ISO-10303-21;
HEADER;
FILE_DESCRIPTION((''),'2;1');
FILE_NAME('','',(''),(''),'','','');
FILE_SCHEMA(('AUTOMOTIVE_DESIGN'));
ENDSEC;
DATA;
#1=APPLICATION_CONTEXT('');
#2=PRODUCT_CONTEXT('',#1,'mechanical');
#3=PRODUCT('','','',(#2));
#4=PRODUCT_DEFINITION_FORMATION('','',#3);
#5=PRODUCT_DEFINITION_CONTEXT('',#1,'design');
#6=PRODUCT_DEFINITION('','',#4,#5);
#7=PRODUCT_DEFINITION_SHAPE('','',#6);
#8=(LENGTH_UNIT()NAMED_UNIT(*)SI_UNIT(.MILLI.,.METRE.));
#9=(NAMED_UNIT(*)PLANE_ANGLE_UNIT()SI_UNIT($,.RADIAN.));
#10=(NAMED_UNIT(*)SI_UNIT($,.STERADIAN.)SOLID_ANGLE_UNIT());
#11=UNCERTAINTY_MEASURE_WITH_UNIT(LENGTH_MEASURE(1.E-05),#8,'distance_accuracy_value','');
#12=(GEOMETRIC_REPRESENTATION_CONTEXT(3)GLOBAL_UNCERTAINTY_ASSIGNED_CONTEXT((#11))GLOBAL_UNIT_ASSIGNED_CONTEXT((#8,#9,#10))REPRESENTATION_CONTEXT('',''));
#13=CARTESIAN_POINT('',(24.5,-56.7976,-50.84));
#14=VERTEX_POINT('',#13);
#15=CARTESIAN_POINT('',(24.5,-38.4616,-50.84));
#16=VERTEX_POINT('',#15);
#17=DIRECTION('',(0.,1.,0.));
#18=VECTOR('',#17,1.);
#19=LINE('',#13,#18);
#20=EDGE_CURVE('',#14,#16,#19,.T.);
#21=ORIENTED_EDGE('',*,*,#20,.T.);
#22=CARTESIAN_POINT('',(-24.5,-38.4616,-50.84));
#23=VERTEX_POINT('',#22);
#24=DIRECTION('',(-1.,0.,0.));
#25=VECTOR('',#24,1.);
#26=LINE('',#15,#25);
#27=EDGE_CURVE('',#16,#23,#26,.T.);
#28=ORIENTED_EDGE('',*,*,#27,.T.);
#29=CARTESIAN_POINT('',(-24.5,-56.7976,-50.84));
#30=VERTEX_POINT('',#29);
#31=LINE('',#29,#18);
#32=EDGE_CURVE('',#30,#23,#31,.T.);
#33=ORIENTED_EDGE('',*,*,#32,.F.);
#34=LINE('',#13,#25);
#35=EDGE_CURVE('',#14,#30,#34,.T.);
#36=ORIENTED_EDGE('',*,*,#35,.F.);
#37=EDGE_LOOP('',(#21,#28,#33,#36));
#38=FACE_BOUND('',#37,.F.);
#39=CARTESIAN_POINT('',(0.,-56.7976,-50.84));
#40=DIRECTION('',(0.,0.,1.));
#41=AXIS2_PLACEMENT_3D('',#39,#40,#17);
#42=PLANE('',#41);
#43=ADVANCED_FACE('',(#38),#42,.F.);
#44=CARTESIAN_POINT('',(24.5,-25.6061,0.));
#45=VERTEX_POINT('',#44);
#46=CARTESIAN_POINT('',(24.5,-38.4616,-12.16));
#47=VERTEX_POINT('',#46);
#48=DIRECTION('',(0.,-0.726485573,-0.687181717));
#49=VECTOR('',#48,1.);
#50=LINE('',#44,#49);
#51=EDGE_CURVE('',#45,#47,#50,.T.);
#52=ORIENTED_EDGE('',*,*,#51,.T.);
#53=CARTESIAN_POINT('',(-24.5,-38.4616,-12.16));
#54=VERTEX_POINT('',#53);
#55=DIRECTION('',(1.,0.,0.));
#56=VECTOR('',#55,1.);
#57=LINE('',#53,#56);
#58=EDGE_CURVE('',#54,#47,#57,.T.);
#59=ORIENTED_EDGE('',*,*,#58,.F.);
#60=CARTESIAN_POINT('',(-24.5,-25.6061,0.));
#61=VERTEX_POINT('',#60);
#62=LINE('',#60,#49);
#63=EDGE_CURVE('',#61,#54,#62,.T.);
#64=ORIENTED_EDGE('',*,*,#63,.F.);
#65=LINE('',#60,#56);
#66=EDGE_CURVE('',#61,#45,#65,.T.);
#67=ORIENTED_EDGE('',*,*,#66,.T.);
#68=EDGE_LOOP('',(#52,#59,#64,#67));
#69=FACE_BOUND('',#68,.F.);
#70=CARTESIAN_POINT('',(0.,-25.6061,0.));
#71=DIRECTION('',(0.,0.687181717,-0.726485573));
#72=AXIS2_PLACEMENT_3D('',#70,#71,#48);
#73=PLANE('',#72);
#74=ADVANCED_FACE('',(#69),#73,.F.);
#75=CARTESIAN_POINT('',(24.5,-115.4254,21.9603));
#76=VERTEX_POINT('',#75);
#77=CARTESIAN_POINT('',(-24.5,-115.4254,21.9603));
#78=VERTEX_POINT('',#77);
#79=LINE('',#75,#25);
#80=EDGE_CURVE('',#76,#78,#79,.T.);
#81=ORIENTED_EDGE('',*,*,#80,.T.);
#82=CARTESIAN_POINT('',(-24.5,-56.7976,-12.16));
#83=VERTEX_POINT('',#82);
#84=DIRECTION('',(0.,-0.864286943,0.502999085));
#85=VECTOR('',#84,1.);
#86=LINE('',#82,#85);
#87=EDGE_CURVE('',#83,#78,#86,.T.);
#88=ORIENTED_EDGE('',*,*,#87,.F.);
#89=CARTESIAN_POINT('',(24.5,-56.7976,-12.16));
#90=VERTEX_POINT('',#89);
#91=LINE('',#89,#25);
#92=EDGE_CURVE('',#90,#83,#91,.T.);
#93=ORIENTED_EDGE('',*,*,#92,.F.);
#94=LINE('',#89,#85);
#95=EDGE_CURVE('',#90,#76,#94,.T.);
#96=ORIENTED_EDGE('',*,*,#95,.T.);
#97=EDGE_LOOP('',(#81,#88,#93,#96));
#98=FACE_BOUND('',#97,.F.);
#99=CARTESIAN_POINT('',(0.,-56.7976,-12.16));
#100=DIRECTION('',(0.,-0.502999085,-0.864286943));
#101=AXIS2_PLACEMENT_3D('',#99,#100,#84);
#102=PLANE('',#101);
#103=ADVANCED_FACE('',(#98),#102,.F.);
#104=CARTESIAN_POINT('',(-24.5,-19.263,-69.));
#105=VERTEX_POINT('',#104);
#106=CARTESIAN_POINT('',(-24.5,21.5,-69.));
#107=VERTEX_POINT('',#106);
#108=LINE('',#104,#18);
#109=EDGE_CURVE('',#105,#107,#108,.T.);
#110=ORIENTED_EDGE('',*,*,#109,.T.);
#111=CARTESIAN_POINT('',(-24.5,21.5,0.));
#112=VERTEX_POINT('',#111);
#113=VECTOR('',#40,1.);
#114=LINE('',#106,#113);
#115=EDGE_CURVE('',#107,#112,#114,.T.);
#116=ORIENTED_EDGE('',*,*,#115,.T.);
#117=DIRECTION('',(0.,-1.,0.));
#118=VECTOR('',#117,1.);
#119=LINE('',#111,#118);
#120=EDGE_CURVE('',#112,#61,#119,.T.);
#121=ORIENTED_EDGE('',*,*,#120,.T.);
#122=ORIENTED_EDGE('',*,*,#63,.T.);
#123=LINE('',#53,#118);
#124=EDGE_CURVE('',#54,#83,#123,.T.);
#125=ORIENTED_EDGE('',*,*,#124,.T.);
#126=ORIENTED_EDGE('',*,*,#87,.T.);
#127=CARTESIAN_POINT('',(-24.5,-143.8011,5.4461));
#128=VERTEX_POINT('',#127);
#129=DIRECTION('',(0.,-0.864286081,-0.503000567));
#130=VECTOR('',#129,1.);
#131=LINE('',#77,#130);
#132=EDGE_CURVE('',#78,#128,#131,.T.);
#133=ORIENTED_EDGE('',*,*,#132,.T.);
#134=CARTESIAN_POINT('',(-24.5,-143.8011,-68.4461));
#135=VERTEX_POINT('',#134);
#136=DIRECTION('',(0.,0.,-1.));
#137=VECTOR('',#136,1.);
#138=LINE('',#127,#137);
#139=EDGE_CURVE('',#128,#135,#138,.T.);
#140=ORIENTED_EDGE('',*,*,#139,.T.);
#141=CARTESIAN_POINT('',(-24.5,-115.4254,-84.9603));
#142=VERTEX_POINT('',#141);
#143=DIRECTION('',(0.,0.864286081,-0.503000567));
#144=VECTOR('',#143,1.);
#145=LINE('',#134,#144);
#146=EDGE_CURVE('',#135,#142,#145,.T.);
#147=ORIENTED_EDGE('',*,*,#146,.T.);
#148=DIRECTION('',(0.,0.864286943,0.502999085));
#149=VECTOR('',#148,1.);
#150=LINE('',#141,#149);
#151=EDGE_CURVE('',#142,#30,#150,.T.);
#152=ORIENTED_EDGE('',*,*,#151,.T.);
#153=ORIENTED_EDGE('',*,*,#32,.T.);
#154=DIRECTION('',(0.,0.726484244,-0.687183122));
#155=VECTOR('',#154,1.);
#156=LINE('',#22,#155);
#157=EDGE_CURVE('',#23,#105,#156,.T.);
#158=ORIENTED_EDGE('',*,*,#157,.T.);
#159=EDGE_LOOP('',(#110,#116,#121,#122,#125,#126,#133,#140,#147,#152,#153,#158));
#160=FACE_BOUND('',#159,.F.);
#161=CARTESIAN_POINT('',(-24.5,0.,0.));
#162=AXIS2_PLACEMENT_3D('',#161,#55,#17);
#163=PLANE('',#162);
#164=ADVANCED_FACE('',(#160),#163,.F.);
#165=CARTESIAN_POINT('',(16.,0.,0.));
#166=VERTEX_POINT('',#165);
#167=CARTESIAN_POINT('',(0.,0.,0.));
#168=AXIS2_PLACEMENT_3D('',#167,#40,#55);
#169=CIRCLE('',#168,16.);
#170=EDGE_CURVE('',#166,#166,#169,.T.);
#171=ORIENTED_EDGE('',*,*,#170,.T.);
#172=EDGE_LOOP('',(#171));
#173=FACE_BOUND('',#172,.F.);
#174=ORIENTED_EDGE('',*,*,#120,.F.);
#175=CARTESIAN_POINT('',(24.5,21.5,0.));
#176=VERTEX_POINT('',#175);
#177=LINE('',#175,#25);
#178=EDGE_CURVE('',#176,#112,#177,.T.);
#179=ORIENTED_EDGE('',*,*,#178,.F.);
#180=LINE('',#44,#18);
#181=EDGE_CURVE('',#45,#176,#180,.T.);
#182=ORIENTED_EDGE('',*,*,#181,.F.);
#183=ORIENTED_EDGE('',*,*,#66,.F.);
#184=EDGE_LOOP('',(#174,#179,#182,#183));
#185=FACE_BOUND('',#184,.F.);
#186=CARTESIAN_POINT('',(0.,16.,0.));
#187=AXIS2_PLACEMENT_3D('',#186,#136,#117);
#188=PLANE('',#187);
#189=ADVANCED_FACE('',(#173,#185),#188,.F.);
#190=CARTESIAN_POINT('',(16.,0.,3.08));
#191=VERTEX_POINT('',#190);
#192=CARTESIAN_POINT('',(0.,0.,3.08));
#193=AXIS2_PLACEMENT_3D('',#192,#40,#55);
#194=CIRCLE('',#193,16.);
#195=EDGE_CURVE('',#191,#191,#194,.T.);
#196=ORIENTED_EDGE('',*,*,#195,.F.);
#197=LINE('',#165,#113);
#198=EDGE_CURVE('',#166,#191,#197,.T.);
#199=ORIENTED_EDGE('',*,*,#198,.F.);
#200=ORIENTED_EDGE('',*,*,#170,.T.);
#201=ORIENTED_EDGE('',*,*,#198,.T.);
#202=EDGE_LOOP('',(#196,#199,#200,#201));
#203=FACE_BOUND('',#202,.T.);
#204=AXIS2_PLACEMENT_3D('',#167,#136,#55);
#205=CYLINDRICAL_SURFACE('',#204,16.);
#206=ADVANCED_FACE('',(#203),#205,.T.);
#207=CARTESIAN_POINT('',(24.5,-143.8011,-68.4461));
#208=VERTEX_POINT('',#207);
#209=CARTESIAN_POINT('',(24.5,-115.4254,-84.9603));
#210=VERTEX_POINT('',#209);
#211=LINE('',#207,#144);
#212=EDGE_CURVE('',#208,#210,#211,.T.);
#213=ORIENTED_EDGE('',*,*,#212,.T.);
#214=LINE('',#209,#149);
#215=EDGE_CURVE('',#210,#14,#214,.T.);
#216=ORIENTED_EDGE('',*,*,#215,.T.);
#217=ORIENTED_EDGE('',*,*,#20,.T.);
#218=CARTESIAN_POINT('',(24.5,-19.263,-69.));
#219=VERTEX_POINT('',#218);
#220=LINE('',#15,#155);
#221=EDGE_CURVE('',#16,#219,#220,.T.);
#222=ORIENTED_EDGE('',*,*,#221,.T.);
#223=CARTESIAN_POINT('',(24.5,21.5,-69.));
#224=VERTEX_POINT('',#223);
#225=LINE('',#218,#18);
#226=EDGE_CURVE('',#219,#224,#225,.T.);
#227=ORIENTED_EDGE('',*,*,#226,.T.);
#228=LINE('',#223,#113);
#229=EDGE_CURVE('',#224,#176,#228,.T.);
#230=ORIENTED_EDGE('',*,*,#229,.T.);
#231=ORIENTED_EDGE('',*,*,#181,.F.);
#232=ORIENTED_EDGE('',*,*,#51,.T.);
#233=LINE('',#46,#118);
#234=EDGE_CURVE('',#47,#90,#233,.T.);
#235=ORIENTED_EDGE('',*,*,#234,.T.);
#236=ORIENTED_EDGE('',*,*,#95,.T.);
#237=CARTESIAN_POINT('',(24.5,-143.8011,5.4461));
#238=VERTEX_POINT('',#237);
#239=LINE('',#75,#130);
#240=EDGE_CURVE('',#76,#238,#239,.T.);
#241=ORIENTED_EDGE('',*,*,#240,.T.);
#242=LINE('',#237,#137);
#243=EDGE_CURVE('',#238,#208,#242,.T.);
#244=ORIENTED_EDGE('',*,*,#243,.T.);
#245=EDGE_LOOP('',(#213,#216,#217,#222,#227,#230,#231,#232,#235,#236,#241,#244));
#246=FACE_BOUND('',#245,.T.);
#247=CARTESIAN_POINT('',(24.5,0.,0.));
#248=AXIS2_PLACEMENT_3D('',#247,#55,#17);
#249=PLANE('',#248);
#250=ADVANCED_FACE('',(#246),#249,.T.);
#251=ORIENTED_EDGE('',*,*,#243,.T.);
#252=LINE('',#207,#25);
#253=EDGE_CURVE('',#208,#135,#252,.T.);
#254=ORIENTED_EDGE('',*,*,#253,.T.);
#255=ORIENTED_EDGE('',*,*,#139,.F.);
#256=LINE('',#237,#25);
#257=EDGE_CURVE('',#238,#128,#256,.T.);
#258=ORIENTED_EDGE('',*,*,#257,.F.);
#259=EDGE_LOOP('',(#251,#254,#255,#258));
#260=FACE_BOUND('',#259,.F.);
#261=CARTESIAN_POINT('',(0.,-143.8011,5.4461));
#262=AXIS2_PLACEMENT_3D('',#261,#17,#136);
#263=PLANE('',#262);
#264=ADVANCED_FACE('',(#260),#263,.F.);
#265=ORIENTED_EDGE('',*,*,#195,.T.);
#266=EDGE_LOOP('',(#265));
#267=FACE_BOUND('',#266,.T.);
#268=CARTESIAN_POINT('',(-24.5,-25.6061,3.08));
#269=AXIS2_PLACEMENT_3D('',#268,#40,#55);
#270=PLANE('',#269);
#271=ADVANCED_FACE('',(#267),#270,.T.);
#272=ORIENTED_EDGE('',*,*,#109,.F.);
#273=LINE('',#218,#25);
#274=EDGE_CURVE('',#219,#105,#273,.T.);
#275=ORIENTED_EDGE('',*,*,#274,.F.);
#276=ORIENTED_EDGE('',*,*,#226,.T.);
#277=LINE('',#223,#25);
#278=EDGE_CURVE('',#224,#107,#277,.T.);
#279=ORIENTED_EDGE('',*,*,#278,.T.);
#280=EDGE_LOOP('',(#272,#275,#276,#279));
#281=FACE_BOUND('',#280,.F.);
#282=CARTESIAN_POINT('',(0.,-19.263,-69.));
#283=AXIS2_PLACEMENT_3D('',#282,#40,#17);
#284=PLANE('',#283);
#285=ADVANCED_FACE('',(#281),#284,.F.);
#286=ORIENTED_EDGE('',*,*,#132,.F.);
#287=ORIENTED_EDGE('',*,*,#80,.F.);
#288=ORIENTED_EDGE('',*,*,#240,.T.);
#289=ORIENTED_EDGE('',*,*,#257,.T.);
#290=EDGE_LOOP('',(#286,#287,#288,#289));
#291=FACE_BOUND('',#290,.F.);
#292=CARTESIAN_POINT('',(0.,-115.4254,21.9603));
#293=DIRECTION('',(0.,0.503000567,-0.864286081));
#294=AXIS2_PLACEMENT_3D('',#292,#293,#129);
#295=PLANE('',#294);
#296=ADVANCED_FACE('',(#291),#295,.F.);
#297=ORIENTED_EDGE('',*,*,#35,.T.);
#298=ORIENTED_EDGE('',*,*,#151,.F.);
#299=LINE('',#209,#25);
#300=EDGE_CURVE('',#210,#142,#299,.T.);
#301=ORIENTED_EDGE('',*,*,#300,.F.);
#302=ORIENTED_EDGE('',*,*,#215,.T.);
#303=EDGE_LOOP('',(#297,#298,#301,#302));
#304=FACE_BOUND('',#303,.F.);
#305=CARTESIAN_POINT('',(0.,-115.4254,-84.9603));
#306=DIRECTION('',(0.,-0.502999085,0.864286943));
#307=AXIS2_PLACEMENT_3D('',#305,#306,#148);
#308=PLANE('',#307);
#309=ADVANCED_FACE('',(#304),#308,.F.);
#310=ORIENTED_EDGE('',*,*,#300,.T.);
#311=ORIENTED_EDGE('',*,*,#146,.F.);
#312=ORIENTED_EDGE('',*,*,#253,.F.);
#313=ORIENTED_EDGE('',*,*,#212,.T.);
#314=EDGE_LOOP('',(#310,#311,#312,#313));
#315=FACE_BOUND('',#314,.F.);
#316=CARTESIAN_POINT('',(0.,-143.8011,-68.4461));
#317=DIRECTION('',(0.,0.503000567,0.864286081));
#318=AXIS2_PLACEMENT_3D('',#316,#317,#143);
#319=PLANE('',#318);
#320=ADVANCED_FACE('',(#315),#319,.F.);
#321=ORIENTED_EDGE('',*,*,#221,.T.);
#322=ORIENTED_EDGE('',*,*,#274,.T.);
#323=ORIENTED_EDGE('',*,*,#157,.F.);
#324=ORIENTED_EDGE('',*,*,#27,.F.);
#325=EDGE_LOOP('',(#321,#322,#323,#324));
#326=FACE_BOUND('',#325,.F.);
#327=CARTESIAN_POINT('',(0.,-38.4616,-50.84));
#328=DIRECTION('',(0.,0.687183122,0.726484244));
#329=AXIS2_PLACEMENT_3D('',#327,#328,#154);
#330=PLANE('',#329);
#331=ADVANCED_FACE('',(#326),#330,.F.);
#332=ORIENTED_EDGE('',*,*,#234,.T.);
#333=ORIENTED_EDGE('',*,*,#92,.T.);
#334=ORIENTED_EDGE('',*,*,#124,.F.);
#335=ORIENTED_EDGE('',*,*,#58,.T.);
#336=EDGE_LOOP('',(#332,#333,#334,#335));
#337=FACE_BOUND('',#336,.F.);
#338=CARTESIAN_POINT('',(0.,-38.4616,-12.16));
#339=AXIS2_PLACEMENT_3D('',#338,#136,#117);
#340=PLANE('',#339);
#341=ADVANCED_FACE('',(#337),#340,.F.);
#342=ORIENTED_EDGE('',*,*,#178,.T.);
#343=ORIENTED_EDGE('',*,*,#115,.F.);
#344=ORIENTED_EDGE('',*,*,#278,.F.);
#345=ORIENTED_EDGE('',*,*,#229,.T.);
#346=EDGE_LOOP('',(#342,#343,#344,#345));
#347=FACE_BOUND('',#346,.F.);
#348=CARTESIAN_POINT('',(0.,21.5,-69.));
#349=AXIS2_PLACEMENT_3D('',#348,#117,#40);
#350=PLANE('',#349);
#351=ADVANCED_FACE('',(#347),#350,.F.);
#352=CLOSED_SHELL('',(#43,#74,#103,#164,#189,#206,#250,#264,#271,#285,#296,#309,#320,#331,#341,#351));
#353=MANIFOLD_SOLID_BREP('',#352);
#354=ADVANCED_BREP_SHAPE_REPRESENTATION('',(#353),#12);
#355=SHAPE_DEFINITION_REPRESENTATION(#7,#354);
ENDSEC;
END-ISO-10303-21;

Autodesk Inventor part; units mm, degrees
ref_plane "XZ Plane" through (0, 0, 0) normal (0, 1, 0) x (-1, 0, 0)
sketch "Sketch1" plane through (0, 0, 0) normal (1, 0, 0) x (0, 1, 0)
  line L0 (-16, 3.08) -> (16, 3.08)
  line L1 (16, 3.08) -> (16, 0)
  line L2 (16, 0) -> (-16, 0)
  line L3 (-16, 0) -> (-16, 3.08)
  line L4 (-20.328, 3.08) -> (15.75, 3.08) construction
  line L5 (16, 0) -> (-16, 0) construction
  line L6 (-16, 0) -> (-25.6061, 0)
  line L7 (-25.6061, 0) -> (-38.4616, -12.16)
  line L8 (-38.4616, -12.16) -> (-56.7976, -12.16)
  line L9 (-56.7976, -12.16) -> (-115.4254, 21.9603)
  line L10 (-115.4254, 21.9603) -> (-143.8011, 5.4461)
  line L11 (-143.8011, 5.4461) -> (-143.8011, -68.4461)
  line L12 (-143.8011, -68.4461) -> (-115.4254, -84.9603)
  line L13 (-115.4254, -84.9603) -> (-56.7976, -50.84)
  line L14 (-56.7976, -50.84) -> (-38.4616, -50.84)
  line L15 (-38.4616, -50.84) -> (-19.263, -69)
  line L16 (-19.263, -69) -> (21.5, -69)
  line L17 (21.5, -69) -> (21.5, 0)
  line L18 (21.5, 0) -> (16, 0)
  line L19 (-19.5, -69) -> (19.5, -69) construction
  line L20 (-36.9927, -10.7705) -> (-23.8189, 1.6905) construction
  line L21 (-23.8189, -64.6905) -> (-36.9927, -52.2295) construction
  line L22 (-56.7976, -12.16) -> (-40.4836, -12.16) construction
  line L23 (-40.4836, -50.84) -> (-56.7976, -50.84) construction
  line L24 (-133.6344, 11.4742) -> (-125.5921, 15.9321) construction
  line L25 (-125.5921, -78.9321) -> (-133.6344, -74.4742) construction
  point P0 (0, 0)
  point P1 (0, 0)
  point P2 (21.5, -10)
  point P3 (-129.6132, 13.7032)
  point P4 (-129.6132, -76.7032)
  point P5 (16, 0)
  point P6 (16, 0)
extrude "Extrusion3" add sketch "Sketch1" along normal mid plane 49 contours L2 L18 L17 L16 L15 L14 L13 L12 L11 L10 L9 L8 L7 L6
sketch "Sketch3" plane through (-24.5, -25.6061, 0) normal (0, 0, 1) x (1, 0, 0)
  circle A0 centre (24.5, 25.6061) radius 16 projected
extrude "Extrusion4" add sketch "Sketch3" along normal up to surface (3.08 mm away)
properties part number "BaseBoundingBox"
